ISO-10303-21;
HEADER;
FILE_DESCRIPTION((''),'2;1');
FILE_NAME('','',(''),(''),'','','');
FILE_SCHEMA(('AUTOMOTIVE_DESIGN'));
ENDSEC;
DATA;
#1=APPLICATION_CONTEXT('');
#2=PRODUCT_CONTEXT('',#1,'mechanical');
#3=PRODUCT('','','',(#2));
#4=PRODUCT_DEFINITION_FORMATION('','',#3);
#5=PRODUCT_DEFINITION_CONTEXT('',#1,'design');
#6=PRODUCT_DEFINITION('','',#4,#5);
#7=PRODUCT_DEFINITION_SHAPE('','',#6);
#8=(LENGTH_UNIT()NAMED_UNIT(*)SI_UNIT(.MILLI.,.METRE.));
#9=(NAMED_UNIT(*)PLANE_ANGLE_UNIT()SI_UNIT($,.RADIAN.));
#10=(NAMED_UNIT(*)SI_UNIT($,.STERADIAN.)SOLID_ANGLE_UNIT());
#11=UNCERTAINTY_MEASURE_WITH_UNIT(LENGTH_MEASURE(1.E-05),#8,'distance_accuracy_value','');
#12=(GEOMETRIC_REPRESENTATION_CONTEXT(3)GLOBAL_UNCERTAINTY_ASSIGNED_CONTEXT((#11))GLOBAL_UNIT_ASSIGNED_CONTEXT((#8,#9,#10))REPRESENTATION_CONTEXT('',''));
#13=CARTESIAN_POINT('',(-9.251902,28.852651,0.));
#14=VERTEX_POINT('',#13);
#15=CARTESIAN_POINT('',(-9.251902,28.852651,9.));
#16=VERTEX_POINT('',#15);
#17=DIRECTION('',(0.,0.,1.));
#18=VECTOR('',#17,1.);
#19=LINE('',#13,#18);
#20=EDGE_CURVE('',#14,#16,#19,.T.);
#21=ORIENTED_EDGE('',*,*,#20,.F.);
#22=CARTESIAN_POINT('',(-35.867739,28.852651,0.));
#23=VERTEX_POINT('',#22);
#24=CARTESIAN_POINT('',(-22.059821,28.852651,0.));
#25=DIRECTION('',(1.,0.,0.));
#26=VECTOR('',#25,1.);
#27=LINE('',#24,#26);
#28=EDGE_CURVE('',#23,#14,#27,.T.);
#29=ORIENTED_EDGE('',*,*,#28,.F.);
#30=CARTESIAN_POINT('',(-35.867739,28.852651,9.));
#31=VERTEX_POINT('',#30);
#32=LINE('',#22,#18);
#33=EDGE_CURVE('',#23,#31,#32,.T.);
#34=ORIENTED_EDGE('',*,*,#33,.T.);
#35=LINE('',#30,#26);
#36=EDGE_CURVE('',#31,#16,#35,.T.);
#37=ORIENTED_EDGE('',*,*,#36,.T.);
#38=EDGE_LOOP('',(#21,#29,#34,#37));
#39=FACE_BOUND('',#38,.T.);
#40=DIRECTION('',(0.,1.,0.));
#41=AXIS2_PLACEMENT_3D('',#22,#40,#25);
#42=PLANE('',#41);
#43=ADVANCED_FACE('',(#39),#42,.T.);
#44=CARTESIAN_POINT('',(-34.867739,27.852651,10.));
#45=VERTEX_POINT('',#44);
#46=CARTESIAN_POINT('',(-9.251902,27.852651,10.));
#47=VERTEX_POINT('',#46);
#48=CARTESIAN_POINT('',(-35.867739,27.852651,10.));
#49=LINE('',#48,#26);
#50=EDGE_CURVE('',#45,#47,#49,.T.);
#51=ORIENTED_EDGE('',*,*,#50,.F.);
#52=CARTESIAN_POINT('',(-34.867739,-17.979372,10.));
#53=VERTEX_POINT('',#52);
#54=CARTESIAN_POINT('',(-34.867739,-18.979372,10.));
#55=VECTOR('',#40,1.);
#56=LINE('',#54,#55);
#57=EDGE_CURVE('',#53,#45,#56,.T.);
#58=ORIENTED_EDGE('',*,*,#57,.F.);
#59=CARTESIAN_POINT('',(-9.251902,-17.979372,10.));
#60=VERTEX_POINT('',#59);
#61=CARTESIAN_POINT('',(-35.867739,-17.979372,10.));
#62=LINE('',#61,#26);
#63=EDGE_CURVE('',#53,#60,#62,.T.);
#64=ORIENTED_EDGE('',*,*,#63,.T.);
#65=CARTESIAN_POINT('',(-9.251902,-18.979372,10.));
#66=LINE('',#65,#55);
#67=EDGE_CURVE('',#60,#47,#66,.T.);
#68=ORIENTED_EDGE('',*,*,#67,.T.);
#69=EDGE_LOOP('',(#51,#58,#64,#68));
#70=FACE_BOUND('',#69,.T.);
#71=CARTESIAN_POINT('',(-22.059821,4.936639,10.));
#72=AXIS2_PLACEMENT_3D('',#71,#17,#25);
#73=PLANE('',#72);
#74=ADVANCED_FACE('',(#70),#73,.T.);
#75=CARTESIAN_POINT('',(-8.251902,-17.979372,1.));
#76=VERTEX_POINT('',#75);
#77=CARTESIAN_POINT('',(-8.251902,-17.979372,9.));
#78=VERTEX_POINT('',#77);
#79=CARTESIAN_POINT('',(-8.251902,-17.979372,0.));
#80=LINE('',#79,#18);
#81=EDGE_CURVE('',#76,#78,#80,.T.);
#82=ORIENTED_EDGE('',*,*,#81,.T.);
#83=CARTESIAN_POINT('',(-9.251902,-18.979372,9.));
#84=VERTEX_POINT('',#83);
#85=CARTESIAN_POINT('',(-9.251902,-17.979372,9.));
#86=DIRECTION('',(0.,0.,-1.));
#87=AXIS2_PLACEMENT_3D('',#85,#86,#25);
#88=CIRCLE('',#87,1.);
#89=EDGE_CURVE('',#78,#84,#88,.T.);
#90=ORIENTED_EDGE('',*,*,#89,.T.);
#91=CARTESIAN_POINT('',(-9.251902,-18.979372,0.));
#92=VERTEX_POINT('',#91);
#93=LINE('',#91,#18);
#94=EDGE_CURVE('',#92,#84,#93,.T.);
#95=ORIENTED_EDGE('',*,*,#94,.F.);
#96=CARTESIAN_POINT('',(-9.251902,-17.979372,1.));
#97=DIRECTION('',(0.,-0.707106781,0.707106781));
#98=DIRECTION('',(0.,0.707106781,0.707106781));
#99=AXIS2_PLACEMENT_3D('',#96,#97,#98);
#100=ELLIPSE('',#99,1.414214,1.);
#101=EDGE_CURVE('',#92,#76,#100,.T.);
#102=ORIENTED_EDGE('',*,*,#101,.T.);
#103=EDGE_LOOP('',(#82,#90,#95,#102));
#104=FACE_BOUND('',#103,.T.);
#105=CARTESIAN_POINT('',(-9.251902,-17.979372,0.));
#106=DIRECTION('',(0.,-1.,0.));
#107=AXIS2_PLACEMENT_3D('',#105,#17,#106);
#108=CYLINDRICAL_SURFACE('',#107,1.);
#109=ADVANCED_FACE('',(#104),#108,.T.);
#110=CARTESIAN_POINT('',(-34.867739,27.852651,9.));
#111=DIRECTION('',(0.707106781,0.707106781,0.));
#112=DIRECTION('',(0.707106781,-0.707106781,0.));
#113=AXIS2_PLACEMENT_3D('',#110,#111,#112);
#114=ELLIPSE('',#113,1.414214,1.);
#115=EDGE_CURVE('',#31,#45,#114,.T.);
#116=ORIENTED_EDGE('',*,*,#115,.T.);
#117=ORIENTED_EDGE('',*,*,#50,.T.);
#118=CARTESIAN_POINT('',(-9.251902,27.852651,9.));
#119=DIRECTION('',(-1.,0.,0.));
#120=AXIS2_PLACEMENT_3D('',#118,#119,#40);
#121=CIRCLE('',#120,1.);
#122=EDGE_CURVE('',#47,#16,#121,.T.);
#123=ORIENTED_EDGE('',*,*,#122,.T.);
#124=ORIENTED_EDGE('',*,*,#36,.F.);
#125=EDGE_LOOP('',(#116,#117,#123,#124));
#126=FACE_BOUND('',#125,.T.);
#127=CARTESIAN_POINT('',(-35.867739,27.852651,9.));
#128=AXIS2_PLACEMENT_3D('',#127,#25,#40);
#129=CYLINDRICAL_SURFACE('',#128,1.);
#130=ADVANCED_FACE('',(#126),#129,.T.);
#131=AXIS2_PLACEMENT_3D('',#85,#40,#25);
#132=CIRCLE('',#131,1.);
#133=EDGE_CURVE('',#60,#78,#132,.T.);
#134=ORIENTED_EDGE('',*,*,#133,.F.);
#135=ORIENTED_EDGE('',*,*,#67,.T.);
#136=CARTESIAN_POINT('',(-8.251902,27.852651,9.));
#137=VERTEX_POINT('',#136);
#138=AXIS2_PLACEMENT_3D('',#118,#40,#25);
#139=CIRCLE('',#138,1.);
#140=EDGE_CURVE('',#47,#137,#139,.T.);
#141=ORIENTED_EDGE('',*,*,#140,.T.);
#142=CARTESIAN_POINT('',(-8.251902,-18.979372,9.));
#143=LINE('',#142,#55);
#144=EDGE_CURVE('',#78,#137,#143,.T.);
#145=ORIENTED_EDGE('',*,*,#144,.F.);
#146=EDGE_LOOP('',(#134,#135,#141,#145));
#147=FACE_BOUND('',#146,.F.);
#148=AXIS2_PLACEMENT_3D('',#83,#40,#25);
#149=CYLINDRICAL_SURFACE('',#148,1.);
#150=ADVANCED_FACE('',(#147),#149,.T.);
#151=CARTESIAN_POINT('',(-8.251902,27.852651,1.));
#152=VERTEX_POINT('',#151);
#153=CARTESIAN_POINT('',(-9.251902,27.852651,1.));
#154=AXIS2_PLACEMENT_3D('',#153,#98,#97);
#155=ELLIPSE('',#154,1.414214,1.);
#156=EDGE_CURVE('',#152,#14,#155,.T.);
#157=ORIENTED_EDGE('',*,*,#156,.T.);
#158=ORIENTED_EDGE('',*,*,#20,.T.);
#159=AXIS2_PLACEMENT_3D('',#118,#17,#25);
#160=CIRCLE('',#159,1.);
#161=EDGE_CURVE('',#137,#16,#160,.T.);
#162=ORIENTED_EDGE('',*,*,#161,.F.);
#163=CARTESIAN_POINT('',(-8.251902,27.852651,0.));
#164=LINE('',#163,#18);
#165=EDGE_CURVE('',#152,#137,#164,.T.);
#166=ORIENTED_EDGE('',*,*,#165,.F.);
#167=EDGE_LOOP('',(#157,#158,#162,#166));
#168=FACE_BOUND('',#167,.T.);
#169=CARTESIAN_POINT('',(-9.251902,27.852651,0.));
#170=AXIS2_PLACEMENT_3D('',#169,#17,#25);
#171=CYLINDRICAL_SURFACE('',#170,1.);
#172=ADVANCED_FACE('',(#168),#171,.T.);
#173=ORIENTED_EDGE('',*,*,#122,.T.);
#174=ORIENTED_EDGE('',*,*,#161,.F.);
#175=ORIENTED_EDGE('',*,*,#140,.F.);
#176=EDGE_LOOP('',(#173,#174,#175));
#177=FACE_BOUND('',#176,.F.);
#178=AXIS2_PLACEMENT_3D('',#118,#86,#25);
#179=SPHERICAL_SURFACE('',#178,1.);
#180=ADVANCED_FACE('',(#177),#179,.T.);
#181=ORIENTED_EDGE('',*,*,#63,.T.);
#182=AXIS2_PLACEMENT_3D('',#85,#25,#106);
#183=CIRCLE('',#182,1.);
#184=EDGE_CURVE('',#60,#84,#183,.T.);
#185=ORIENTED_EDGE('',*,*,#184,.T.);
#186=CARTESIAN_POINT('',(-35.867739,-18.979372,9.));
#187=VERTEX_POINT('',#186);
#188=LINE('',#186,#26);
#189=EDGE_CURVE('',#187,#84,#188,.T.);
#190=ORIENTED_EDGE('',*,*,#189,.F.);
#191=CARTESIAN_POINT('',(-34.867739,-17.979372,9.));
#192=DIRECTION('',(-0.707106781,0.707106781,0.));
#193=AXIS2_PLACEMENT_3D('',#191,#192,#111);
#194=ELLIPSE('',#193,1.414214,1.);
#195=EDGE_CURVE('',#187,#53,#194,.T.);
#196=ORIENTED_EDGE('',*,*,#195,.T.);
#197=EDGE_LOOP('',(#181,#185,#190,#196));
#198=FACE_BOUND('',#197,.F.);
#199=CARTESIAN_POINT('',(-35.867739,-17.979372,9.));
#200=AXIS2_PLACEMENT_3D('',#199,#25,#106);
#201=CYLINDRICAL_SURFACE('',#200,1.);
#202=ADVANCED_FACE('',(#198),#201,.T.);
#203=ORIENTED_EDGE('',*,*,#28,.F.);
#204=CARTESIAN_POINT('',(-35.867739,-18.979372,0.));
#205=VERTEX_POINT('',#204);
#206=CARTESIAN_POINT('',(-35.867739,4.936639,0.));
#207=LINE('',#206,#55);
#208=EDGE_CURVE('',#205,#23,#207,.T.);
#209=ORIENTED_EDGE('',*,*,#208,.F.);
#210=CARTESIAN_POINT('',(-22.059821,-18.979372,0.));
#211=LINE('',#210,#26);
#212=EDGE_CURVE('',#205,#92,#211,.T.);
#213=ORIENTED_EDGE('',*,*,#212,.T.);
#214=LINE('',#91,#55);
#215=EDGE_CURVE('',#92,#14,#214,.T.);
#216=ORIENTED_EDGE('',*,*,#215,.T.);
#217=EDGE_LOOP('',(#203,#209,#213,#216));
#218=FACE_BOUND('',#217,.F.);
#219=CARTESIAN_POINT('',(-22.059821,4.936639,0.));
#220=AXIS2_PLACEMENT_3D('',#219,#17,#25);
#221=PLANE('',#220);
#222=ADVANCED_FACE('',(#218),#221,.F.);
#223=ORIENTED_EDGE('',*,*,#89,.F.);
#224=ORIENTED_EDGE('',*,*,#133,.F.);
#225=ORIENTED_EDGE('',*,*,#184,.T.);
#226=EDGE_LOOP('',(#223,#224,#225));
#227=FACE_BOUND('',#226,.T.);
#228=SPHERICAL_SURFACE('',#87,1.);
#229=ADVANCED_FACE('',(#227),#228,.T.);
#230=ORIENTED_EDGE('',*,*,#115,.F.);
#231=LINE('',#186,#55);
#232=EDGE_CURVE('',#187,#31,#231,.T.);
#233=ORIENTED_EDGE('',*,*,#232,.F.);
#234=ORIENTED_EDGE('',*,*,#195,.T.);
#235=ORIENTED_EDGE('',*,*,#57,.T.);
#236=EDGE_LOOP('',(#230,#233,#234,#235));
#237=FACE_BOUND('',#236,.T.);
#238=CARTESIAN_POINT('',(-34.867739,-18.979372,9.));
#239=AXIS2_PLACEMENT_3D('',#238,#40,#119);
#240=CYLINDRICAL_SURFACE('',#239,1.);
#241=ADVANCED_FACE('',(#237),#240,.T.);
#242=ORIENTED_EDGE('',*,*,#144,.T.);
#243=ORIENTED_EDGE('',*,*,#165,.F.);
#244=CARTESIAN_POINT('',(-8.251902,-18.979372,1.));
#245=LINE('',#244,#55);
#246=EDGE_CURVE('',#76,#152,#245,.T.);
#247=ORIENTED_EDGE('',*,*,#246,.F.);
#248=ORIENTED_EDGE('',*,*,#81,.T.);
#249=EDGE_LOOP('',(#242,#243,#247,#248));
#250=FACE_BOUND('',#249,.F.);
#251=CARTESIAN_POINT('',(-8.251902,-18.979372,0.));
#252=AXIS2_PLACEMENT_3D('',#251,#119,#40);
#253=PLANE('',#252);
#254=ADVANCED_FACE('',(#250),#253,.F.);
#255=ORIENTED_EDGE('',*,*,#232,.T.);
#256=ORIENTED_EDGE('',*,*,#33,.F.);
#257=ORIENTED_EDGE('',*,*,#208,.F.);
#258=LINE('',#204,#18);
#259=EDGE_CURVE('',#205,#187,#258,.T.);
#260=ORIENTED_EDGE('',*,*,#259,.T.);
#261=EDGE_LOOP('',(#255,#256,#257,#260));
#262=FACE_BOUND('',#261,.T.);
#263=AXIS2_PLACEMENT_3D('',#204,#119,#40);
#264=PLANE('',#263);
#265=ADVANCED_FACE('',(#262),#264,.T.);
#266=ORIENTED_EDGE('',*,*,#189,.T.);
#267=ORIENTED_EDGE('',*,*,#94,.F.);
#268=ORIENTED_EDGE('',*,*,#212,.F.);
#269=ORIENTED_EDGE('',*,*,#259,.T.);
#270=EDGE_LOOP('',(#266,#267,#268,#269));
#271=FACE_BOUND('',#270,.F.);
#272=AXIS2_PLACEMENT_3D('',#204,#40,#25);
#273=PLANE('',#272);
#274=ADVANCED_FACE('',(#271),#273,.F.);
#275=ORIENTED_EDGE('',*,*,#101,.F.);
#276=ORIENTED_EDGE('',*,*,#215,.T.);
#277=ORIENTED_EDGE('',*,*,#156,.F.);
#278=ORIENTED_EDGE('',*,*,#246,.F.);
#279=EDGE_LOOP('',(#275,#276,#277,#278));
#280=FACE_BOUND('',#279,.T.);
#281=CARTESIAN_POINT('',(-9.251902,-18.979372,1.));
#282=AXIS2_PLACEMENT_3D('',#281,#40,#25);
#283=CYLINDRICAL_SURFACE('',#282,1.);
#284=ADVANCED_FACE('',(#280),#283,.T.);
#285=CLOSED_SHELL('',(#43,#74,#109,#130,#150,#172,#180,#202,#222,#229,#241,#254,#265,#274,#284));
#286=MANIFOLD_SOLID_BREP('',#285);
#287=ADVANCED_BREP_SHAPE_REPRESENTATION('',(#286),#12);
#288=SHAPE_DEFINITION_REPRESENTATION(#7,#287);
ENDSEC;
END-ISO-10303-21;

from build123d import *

# Parameters (mm, degrees)
F0_W     = 27.6158377528
F0_H     = 47.8320233524
F1_DEPTH = 10
F2_R     = 1


# Not quite as in the source:
# - the program builds the solid bodies; features that only make, move or delete a surface that nothing else refers to are left out


with BuildPart() as f1:
    # F0 (on Top) → F1 (new body)
    with BuildSketch(Plane.XY):
        with Locations((-22.0598205924, 4.9366392195)):
            Rectangle(F0_W, F0_H)
    extrude(amount=F1_DEPTH)

    # F2
    f2_edges = [f1.edges().sort_by_distance(p)[0] for p in [
        (-8.251902, -18.979372, 5),
        (-8.251902, 28.852651, 5),
        (-8.251902, 4.936639, 0),
        (-8.251902, 4.936639, 10),
        (-22.059821, 28.852651, 10),
        (-35.867739, 4.936639, 10),
        (-22.059821, -18.979372, 10),
    ]]
    fillet(f2_edges, radius=F2_R)


solid = f1.part
